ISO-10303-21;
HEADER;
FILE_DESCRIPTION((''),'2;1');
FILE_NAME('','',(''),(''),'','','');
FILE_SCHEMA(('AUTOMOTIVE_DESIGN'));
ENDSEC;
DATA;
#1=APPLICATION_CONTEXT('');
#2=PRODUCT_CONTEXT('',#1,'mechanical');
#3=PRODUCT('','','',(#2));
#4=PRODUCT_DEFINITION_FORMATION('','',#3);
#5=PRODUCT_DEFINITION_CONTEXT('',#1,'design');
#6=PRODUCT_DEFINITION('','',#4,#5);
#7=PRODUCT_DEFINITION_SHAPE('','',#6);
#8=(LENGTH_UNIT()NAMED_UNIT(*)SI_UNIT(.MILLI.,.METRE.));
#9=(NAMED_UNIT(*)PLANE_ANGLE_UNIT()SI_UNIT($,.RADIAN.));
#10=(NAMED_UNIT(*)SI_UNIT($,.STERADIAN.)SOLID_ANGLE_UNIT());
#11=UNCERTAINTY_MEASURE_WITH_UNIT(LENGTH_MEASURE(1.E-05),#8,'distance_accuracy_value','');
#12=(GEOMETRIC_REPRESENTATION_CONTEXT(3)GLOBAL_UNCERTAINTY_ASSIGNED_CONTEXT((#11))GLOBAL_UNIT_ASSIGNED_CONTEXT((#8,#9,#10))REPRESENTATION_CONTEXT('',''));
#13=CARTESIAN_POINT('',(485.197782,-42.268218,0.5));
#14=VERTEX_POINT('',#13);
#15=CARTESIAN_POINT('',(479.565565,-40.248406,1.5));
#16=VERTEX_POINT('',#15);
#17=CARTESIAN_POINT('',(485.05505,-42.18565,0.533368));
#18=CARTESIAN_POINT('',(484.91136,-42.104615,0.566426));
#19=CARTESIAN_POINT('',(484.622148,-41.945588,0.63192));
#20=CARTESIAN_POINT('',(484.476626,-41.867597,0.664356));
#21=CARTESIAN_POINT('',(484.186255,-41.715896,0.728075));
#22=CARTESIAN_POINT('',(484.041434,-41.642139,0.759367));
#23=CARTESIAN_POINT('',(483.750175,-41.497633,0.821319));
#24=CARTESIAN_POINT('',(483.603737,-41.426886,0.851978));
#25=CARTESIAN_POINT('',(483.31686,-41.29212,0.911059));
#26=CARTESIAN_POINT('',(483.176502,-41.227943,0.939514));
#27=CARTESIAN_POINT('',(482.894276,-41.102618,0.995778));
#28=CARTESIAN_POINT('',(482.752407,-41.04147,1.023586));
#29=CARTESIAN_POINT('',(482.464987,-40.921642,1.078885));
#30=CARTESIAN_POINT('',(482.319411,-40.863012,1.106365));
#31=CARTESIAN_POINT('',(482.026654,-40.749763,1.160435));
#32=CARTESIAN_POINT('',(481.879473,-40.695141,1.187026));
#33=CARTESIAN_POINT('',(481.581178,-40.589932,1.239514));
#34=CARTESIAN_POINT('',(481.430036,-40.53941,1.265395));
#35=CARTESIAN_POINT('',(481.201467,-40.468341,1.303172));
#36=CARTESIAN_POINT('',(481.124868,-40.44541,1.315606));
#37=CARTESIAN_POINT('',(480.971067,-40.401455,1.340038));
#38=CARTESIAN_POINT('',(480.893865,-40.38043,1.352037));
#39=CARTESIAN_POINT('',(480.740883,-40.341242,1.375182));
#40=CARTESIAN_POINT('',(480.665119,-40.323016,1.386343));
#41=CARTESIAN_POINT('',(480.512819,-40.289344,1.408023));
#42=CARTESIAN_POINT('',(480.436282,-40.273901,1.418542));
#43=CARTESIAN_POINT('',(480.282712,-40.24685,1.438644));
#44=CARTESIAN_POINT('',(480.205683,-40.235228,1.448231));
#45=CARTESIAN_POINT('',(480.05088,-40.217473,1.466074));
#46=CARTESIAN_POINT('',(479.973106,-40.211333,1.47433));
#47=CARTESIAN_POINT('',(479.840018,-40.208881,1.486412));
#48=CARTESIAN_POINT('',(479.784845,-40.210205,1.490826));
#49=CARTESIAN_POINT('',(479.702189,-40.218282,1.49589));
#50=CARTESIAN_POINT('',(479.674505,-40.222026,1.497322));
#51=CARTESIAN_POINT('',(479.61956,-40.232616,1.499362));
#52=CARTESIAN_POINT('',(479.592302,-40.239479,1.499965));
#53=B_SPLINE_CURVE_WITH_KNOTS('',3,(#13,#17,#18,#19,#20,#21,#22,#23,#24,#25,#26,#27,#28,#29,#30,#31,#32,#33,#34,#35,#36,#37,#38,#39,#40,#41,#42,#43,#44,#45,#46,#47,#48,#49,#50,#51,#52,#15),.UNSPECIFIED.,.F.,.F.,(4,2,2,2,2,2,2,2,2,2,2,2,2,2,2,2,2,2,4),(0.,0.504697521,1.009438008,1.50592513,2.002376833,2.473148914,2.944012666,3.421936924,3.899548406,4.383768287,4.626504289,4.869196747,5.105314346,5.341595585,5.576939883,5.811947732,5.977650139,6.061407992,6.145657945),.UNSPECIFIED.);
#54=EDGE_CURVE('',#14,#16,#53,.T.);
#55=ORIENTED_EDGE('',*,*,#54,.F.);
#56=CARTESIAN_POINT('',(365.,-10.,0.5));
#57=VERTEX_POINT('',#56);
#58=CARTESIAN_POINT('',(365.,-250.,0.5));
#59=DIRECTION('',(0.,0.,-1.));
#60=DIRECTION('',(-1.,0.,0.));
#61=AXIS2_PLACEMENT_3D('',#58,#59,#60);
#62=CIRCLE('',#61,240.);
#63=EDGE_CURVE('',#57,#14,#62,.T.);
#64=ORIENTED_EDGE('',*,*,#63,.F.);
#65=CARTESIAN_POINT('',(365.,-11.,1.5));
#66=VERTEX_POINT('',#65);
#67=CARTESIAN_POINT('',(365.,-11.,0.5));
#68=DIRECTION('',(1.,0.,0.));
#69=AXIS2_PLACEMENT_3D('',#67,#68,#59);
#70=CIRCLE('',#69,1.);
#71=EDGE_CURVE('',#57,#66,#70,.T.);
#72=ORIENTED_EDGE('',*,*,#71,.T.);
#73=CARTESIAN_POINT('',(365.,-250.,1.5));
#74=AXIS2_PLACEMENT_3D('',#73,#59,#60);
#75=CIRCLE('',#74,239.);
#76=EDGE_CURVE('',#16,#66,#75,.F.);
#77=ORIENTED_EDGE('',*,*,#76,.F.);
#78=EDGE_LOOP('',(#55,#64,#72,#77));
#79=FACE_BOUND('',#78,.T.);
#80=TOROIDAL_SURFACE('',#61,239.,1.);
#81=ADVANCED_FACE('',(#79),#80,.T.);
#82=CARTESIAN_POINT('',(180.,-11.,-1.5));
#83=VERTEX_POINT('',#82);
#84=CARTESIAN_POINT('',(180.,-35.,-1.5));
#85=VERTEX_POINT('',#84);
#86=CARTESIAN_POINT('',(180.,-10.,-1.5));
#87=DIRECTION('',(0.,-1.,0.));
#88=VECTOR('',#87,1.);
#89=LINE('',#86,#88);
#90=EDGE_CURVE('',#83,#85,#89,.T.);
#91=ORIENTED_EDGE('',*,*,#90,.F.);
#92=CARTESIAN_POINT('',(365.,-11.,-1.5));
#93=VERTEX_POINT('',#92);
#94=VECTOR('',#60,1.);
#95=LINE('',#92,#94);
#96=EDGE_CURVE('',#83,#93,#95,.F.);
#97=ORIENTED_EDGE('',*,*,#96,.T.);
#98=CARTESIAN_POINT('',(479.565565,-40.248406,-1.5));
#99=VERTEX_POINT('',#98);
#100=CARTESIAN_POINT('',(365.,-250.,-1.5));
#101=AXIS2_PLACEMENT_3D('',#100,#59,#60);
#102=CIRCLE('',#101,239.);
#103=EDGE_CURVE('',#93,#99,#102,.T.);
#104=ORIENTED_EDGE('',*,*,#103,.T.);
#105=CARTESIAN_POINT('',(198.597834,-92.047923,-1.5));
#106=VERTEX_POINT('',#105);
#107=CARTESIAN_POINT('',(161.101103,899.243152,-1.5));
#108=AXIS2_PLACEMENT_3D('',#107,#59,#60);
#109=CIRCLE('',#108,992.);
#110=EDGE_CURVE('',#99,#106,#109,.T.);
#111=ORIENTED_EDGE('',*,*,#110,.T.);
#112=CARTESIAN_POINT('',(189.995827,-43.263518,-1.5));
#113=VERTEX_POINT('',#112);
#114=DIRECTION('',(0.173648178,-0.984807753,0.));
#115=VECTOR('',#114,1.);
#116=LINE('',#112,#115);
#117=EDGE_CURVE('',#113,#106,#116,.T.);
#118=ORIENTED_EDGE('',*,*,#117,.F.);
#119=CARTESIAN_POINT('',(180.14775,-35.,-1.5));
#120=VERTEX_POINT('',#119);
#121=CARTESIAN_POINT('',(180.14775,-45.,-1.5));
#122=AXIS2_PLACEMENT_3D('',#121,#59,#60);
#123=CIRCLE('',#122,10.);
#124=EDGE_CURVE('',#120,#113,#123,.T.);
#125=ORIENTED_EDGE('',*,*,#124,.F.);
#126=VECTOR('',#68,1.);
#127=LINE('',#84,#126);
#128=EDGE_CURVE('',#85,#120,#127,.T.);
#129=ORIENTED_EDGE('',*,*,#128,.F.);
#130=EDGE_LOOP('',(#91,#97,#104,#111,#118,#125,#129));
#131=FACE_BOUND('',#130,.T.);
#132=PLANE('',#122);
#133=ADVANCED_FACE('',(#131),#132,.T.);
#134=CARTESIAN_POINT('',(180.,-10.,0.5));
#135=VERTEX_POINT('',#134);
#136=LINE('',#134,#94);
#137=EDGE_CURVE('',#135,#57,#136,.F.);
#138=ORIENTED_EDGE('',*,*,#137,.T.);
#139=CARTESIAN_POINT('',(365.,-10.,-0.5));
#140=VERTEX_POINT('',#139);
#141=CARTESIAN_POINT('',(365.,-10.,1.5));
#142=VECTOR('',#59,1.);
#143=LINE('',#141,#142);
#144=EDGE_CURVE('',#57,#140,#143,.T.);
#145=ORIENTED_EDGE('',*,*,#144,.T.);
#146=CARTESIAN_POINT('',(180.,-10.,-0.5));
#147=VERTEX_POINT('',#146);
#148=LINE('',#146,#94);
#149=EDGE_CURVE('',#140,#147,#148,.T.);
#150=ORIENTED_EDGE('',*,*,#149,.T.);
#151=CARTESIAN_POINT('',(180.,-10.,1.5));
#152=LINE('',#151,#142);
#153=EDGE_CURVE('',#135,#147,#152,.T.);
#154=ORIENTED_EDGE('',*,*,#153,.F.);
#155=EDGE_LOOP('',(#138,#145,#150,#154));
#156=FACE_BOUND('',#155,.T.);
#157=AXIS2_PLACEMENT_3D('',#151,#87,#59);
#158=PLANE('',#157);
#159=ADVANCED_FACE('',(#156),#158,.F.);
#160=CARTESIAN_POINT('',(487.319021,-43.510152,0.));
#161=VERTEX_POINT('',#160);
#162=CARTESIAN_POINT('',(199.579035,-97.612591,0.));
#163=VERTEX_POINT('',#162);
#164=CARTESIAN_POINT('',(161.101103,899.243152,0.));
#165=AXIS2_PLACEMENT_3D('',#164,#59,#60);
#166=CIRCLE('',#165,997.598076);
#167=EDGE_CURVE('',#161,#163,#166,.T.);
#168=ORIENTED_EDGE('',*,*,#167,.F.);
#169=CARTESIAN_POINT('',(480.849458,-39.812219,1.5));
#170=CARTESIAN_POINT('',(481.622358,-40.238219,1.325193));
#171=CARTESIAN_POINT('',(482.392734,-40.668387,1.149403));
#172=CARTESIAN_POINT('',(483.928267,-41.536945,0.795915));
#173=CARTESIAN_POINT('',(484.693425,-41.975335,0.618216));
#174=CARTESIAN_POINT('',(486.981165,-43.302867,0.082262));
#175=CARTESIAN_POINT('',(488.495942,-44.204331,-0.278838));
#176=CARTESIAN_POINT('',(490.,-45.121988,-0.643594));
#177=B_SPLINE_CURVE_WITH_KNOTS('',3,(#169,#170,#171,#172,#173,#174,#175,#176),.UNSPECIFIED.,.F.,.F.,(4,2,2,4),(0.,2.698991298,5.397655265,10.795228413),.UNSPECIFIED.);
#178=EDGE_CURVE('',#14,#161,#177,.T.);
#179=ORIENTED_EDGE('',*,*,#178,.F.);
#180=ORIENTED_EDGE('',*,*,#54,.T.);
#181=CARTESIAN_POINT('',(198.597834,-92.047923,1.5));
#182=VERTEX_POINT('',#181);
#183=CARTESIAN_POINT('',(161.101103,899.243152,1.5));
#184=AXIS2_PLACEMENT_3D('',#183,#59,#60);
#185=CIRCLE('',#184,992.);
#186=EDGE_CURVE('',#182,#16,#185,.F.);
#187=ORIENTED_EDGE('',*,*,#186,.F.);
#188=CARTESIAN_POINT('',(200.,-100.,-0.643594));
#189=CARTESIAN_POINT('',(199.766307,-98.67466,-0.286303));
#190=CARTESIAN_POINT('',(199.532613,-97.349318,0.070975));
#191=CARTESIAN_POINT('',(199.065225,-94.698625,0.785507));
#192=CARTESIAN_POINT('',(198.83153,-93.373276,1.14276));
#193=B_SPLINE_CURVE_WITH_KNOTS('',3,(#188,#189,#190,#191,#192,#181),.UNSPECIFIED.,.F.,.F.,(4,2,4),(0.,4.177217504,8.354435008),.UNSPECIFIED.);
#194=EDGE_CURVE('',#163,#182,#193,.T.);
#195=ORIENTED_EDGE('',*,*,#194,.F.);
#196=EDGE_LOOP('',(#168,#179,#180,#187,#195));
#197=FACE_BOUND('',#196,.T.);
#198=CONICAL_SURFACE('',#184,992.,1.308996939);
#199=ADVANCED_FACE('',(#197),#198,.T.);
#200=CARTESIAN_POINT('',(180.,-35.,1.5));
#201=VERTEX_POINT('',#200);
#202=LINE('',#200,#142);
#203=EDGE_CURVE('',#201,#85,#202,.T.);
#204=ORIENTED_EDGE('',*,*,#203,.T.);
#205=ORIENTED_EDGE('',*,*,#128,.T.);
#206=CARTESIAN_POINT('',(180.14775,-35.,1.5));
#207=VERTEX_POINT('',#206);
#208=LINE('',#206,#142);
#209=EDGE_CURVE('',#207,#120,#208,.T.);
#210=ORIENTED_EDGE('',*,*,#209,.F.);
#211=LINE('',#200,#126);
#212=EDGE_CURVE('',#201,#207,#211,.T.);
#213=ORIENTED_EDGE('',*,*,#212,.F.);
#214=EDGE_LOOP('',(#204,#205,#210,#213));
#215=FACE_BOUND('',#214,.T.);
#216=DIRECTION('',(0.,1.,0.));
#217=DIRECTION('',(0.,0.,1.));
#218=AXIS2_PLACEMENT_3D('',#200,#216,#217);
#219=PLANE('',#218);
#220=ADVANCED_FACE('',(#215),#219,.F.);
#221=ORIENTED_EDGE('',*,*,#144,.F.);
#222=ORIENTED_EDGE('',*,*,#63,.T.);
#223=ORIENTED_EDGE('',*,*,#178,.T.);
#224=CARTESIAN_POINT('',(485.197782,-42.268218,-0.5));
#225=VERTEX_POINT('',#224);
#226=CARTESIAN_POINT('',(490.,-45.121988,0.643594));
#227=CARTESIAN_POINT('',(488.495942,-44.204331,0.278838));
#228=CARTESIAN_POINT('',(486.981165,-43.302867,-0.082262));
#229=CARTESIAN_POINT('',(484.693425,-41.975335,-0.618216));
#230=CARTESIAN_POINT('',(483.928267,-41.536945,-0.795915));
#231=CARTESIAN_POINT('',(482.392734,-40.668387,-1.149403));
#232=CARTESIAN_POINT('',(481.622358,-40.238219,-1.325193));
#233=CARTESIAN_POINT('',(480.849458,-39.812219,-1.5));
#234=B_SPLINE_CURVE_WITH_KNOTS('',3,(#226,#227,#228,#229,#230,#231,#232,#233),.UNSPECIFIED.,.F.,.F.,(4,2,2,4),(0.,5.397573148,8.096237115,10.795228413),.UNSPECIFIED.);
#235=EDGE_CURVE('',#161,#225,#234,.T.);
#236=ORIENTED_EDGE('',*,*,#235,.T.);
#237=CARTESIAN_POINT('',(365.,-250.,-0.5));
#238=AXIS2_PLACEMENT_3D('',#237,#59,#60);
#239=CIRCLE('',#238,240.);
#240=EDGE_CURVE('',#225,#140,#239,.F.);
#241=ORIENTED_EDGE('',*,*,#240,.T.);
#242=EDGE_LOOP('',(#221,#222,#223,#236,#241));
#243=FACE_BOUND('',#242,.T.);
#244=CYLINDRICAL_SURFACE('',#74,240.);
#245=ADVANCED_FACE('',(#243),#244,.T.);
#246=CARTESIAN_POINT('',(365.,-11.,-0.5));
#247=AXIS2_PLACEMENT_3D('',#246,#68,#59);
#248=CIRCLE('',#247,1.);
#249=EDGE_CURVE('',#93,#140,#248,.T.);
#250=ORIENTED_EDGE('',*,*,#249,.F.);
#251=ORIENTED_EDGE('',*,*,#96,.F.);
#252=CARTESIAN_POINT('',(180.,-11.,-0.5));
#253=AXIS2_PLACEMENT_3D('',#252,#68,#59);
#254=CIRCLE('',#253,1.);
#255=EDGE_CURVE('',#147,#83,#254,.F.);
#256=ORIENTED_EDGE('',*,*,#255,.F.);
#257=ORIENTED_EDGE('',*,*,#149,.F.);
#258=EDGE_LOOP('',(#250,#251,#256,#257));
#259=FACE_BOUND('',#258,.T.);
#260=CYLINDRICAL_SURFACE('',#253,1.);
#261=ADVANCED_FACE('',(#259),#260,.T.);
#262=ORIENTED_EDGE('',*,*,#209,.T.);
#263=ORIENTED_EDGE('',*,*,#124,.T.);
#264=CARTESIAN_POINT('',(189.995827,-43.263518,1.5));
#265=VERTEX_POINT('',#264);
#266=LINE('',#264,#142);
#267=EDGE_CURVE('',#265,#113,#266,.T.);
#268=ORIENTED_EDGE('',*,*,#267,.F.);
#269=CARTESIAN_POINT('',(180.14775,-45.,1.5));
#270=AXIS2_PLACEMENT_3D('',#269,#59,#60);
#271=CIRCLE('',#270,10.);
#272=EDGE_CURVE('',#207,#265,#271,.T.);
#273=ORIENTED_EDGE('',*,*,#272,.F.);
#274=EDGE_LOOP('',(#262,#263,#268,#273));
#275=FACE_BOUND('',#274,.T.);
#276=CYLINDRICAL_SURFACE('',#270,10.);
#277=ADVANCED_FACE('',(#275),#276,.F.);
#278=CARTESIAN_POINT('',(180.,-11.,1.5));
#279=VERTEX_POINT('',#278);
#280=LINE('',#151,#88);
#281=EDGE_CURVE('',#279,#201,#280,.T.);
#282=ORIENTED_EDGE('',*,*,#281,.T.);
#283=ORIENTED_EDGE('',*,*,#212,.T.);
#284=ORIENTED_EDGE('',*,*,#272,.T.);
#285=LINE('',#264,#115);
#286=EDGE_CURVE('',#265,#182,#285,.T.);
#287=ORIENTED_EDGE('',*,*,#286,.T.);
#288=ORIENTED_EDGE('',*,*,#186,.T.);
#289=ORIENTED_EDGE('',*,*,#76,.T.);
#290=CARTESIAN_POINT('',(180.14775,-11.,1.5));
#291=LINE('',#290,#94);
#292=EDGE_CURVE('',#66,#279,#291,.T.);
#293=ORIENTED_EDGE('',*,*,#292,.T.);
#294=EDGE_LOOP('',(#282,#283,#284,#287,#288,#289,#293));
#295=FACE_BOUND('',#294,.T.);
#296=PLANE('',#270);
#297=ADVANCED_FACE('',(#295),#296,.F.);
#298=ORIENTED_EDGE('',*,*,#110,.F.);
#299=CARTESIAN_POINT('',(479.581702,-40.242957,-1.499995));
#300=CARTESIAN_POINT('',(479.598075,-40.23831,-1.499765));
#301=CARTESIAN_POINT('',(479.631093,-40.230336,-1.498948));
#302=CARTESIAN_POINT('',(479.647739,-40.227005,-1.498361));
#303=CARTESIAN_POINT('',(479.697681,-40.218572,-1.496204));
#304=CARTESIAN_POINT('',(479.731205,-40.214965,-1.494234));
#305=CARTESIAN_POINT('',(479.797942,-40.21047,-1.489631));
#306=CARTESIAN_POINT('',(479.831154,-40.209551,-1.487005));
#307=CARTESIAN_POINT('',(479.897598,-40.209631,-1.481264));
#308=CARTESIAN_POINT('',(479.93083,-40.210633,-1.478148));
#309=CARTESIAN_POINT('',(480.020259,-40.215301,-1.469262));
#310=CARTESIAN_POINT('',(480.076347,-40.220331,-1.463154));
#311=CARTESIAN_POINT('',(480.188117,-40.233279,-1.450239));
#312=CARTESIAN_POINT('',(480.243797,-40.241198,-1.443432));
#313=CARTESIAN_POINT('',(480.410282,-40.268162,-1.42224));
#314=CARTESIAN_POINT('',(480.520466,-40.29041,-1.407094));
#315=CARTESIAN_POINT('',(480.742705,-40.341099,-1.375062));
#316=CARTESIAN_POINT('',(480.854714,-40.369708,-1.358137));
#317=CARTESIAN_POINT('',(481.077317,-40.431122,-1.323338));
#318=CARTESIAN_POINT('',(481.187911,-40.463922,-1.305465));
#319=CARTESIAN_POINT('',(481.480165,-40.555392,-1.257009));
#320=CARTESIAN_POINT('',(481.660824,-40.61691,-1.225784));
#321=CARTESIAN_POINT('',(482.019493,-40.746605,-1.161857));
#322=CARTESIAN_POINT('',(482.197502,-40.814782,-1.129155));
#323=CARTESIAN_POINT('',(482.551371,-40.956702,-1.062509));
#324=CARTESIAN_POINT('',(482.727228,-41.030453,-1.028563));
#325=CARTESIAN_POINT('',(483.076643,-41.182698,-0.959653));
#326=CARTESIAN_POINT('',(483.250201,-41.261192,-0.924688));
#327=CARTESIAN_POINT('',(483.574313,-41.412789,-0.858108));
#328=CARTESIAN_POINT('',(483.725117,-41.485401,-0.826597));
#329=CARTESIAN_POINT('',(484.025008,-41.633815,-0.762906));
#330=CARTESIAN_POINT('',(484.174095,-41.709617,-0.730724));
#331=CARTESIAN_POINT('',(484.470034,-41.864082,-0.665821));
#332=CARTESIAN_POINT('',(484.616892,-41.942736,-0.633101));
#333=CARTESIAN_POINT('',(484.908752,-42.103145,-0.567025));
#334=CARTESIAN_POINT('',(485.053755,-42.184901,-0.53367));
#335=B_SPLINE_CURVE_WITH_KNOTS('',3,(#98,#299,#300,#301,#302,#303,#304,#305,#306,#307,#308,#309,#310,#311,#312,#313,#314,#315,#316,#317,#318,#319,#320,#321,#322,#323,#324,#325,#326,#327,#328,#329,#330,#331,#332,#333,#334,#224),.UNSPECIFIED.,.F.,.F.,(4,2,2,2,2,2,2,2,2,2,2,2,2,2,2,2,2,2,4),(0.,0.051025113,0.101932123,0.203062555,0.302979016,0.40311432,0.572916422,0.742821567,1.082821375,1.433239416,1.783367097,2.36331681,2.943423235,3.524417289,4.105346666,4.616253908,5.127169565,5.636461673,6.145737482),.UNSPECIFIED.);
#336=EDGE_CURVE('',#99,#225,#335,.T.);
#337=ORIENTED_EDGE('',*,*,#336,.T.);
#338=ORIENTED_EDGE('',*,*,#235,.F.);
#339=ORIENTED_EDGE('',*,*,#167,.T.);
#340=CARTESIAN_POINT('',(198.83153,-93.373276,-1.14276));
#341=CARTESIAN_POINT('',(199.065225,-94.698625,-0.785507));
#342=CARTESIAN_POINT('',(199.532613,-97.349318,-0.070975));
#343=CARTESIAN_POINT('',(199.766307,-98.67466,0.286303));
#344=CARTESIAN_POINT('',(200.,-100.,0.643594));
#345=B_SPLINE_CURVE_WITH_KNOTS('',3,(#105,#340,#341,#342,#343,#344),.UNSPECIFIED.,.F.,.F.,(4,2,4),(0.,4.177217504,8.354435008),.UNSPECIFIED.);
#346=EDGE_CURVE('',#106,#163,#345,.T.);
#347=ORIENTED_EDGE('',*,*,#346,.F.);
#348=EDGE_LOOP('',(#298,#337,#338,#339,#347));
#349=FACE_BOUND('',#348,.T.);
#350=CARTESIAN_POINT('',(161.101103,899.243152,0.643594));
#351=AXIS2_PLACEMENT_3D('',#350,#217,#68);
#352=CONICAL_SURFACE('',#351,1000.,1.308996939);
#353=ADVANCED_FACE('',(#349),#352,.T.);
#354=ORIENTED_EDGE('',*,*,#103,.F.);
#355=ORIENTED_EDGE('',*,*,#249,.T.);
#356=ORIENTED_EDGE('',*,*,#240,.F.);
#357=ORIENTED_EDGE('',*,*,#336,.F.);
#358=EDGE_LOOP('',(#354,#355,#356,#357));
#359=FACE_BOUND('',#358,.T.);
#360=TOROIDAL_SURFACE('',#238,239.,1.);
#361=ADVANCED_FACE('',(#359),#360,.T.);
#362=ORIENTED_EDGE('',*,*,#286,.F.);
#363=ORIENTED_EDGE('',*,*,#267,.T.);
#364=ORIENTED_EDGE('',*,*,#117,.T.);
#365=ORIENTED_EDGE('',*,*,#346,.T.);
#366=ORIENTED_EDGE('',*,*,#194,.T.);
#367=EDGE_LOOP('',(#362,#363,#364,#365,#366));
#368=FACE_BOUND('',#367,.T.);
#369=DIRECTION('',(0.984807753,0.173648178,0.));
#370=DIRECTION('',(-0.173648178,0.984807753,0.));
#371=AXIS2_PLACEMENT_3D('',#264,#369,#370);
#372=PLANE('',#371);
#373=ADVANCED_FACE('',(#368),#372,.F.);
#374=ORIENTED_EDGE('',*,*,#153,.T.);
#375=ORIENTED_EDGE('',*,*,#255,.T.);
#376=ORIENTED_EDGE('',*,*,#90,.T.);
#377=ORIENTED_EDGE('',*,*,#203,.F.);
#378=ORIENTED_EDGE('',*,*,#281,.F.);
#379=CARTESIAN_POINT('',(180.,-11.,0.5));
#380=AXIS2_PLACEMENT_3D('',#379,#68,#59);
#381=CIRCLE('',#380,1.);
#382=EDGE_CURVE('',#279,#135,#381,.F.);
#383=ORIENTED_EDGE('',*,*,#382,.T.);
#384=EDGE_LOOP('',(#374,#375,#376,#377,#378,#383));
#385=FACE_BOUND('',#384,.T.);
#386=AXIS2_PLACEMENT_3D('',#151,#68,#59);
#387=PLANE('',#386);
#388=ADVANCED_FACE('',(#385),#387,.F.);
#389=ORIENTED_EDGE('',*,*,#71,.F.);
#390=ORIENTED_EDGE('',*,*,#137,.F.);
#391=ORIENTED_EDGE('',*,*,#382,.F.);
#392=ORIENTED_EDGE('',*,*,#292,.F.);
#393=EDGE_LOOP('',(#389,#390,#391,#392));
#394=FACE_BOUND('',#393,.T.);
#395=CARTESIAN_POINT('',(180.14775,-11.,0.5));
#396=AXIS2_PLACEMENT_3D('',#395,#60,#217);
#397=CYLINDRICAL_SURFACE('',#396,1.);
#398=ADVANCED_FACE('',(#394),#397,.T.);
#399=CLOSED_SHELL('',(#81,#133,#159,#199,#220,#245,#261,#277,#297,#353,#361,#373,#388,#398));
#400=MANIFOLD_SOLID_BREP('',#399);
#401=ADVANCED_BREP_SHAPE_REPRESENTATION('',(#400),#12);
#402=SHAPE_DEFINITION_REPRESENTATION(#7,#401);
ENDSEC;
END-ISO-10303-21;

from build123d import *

# Parameters (mm, degrees)
BOSS_EXTRUDE1_DEPTH = 1.5
CHAMFER1_SIZE       = 8
CHAMFER1_SIZE_2     = 2.143593539
FILLET1_R           = 1


with BuildPart() as part:
    # Sketch1 → Boss-Extrude1 (new, symmetric)
    with BuildSketch(Plane.XY):
        with BuildLine():
            Line((180, -10), (365, -10))
            ThreePointArc((365, -10), (429.92024724, -18.947275501), (490, -45.121987515))
            ThreePointArc((490, -45.121987515), (347.035778042, -83.318956837), (200, -100))
            Line((200, -100), (189.995827472, -43.263518223))
            ThreePointArc((189.995827472, -43.263518223), (186.575626039, -37.339555569), (180.147749942, -35))
            Line((180.147749942, -35), (180, -35))
            Line((180, -35), (180, -10))
        make_face()
    extrude(amount=BOSS_EXTRUDE1_DEPTH, both=True)

    # Chamfer1
    # the kernel refuses this chamfer: 8, 2.143593539 mm, written as the material it takes off along each edge
    with BuildSketch(Plane(origin=(161.101103388, 899.243151511, -1.5), x_dir=(0.3484448247934172, -0.9373292932980836, 0), z_dir=(0.9373292932980836, 0.3484448247934172, 0))) as chamfer1_piece_1:
        Polygon((1000 - CHAMFER1_SIZE, 0), (1000, -CHAMFER1_SIZE_2), (1000, 0), align=None)
    revolve(axis=Axis((161.101103388, 899.243151511, -1.5), (0, 0, -1)), revolution_arc=19.353184564, mode=Mode.SUBTRACT)
    with BuildSketch(Plane(origin=(161.101103388, 899.243151511, 1.5), x_dir=(0.3484448247934172, -0.9373292932980836, 0), z_dir=(0.9373292932980836, 0.3484448247934172, 0))) as chamfer1_piece_2:
        Polygon((1000 - CHAMFER1_SIZE, 0), (1000, CHAMFER1_SIZE_2), (1000, 0), align=None)
    revolve(axis=Axis((161.101103388, 899.243151511, 1.5), (0, 0, -1)), revolution_arc=19.353184564, mode=Mode.SUBTRACT)

    # Fillet1
    fillet1_edges = [part.edges().sort_by_distance(p)[0] for p in [
        (424.811924688, -17.572519557, -1.5),
        (424.811924688, -17.572519557, 1.5),
        (272.5, -10, -1.5),
        (272.5, -10, 1.5),
    ]]
    fillet(fillet1_edges, radius=FILLET1_R)


solid = part.part
